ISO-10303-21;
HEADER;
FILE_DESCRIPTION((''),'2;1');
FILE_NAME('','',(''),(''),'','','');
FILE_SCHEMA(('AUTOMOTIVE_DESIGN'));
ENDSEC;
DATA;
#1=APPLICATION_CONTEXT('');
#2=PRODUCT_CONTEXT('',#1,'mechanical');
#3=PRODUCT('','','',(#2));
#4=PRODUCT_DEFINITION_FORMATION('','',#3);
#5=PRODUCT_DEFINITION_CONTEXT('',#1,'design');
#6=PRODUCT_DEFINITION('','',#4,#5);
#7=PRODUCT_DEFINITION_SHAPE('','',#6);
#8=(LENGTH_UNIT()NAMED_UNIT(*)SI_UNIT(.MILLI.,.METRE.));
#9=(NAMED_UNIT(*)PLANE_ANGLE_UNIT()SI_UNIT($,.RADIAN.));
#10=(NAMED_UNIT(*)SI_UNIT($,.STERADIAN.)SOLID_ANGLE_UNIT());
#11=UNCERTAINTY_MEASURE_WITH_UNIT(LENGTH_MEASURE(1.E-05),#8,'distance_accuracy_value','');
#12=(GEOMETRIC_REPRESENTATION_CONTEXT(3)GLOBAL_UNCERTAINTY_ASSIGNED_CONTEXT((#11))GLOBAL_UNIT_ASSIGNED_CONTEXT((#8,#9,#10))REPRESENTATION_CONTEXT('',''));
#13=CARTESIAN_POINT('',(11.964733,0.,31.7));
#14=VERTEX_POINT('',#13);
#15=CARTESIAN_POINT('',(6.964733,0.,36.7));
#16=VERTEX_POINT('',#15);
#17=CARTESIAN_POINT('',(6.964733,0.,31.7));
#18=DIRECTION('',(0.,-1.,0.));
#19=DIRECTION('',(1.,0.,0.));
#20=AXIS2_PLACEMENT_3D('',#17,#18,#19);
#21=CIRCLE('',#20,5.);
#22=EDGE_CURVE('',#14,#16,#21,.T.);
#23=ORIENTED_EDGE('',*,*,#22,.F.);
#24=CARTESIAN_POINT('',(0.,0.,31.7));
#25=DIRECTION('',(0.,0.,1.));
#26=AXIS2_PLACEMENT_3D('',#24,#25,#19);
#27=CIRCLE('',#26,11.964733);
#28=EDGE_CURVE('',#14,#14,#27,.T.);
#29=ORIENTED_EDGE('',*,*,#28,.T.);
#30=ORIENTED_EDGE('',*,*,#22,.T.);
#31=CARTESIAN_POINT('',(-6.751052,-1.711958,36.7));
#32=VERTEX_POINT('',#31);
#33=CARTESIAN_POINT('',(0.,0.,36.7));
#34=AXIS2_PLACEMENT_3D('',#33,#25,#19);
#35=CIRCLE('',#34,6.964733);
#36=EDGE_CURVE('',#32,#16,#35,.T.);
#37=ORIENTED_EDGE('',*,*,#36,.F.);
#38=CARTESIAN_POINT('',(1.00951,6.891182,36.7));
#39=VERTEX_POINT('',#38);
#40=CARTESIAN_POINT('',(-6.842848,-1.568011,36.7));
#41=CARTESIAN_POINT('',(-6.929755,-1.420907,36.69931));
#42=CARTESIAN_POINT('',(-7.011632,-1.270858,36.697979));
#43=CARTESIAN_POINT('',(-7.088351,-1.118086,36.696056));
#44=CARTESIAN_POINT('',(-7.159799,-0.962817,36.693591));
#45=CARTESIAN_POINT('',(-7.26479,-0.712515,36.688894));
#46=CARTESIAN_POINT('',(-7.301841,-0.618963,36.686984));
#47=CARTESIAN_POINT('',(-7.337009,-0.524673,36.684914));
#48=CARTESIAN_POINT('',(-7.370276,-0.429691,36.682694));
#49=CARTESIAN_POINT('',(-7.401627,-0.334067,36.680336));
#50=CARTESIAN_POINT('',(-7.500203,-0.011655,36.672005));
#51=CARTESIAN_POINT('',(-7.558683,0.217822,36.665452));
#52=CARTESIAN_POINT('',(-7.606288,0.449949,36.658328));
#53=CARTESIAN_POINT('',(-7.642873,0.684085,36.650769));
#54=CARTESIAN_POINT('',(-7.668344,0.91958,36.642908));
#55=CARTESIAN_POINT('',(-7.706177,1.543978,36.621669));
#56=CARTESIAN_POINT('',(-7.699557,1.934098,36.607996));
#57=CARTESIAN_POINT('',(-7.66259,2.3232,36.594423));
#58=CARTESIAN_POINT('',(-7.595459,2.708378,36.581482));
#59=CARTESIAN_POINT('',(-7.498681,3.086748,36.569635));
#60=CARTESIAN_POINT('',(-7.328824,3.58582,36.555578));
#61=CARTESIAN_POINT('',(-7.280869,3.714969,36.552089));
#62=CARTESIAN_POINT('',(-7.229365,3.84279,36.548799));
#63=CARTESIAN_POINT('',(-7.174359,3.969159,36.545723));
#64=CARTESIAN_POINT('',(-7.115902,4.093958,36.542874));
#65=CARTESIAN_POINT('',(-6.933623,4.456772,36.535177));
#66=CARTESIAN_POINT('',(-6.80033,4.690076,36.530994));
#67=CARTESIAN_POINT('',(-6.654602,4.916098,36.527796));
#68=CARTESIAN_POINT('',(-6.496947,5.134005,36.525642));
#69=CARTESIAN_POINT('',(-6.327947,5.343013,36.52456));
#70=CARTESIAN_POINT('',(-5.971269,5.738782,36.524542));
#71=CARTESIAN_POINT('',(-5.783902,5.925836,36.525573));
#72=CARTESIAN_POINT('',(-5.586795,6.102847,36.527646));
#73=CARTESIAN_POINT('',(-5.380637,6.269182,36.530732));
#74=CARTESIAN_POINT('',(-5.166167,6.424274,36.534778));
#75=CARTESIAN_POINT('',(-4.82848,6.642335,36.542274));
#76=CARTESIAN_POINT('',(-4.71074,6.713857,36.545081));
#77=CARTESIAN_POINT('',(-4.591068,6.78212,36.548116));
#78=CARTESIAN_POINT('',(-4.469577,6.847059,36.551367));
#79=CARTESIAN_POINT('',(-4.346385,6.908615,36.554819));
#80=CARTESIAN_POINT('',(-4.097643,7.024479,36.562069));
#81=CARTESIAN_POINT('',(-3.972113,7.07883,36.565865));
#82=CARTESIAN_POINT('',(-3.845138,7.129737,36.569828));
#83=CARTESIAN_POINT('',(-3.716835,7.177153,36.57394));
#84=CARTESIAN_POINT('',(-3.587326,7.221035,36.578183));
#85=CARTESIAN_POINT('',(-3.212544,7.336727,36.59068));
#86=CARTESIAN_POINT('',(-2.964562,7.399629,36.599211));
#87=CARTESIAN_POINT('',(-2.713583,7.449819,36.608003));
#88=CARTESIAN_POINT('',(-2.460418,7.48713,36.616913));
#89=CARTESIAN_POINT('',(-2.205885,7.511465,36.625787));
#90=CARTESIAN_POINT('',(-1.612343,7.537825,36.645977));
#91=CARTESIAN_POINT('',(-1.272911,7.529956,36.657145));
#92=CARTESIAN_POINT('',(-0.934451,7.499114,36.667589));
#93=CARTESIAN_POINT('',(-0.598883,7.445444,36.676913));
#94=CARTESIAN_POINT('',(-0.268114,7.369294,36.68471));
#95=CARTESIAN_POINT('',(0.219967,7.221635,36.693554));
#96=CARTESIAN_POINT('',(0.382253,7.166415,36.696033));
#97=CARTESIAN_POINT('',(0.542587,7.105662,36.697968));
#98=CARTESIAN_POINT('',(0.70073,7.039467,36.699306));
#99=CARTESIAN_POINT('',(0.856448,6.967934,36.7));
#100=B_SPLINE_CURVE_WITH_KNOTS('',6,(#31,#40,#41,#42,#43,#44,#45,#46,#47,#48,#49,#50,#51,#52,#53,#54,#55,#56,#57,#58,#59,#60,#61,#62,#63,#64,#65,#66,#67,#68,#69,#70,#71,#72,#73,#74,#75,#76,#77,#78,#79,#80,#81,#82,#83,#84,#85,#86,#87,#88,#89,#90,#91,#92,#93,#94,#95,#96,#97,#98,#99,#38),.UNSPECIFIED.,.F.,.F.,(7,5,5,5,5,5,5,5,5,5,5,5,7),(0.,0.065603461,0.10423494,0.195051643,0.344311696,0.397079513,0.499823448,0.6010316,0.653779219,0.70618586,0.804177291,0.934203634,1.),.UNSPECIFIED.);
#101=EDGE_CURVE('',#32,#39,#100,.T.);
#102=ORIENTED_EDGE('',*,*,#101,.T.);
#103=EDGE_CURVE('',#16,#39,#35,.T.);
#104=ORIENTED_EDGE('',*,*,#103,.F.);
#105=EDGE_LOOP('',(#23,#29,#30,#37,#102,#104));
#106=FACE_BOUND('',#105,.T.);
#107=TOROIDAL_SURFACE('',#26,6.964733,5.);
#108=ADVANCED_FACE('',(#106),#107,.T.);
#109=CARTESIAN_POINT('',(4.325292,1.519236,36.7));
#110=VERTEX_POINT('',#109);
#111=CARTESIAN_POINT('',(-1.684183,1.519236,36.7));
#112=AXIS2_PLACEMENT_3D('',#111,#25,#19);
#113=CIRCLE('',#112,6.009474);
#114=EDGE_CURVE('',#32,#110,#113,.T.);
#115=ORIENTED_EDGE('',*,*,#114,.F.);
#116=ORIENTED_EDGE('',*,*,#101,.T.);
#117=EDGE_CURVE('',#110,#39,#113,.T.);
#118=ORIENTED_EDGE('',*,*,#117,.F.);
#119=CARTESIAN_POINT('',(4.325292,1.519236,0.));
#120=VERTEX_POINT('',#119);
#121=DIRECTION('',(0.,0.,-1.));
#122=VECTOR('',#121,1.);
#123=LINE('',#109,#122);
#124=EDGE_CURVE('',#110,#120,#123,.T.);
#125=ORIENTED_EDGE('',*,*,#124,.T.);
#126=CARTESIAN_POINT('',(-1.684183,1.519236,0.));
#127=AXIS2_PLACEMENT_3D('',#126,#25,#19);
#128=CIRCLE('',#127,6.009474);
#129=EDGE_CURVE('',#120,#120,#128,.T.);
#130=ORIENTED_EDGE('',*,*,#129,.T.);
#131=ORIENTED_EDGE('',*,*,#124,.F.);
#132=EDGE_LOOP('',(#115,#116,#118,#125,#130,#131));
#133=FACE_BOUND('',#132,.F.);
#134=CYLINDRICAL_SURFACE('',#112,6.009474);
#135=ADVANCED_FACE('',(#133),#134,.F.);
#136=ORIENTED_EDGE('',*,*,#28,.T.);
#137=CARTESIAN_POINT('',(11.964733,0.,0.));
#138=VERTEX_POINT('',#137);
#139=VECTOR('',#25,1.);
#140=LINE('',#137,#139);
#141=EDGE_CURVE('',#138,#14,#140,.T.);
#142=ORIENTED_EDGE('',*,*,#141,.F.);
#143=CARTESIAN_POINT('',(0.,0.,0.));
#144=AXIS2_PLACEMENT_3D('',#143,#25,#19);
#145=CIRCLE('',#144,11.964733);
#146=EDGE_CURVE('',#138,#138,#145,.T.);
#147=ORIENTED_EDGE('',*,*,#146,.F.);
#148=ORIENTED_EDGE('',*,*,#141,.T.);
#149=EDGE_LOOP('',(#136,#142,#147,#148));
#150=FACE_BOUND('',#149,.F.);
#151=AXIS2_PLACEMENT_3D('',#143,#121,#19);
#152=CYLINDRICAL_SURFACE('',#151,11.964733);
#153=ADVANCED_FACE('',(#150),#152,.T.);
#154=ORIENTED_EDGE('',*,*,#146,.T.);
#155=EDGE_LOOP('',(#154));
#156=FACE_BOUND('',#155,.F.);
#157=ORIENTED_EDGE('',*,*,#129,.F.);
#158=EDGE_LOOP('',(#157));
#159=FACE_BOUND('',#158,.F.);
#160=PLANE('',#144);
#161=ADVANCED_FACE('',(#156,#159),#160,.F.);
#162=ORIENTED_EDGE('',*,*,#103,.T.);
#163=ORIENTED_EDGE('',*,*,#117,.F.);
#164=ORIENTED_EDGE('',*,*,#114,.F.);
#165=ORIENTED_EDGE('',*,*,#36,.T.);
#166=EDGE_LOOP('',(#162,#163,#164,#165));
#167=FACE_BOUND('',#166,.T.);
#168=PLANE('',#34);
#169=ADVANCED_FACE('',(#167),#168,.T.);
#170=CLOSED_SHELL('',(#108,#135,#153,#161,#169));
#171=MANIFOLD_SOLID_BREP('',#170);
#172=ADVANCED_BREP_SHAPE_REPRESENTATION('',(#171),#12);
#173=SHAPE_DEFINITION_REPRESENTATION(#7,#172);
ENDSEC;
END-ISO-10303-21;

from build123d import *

# Parameters (mm, degrees)
F0_R     = 11.9647327703
F1_DEPTH = 36.7
F2_R     = 6.0094743431
F3_DEPTH = 36.701


# Not quite as in the source:
# - a fillet or chamfer that OpenCascade refuses, or shapes differently, is made with other operations: its cross-section is extruded or revolved along the edge and cut away or added


with BuildPart() as f1:
    # F0 (on Top) → F1 (new body)
    with BuildSketch(Plane.XY):
        Circle(F0_R)
    extrude(amount=F1_DEPTH)

    # F2 (on face) → F3 (cut, through all)
    with BuildSketch(Plane.XY.offset(36.7)):
        with Locations((-1.6841825563, 1.5192364808)):
            Circle(F2_R)
    extrude(amount=-F3_DEPTH, mode=Mode.SUBTRACT)

    # F4: fillet of radius 5 on 1 edges, made by hand

    # F4_s1 → F4_t2 (revolve, cut)
    with BuildSketch(Plane.XZ):
        with BuildLine():
            ThreePointArc((11.9647327703, 31.7), (10.5002666762, 35.2355339059), (6.9647327703, 36.7))
            Line((6.9647327703, 36.7), (11.9647327703, 36.7))
            Line((11.9647327703, 36.7), (11.9647327703, 31.7))
        make_face()
    revolve(axis=Axis((0, 0, 36.7), (0, 0, 1)), mode=Mode.SUBTRACT)


solid = f1.part
